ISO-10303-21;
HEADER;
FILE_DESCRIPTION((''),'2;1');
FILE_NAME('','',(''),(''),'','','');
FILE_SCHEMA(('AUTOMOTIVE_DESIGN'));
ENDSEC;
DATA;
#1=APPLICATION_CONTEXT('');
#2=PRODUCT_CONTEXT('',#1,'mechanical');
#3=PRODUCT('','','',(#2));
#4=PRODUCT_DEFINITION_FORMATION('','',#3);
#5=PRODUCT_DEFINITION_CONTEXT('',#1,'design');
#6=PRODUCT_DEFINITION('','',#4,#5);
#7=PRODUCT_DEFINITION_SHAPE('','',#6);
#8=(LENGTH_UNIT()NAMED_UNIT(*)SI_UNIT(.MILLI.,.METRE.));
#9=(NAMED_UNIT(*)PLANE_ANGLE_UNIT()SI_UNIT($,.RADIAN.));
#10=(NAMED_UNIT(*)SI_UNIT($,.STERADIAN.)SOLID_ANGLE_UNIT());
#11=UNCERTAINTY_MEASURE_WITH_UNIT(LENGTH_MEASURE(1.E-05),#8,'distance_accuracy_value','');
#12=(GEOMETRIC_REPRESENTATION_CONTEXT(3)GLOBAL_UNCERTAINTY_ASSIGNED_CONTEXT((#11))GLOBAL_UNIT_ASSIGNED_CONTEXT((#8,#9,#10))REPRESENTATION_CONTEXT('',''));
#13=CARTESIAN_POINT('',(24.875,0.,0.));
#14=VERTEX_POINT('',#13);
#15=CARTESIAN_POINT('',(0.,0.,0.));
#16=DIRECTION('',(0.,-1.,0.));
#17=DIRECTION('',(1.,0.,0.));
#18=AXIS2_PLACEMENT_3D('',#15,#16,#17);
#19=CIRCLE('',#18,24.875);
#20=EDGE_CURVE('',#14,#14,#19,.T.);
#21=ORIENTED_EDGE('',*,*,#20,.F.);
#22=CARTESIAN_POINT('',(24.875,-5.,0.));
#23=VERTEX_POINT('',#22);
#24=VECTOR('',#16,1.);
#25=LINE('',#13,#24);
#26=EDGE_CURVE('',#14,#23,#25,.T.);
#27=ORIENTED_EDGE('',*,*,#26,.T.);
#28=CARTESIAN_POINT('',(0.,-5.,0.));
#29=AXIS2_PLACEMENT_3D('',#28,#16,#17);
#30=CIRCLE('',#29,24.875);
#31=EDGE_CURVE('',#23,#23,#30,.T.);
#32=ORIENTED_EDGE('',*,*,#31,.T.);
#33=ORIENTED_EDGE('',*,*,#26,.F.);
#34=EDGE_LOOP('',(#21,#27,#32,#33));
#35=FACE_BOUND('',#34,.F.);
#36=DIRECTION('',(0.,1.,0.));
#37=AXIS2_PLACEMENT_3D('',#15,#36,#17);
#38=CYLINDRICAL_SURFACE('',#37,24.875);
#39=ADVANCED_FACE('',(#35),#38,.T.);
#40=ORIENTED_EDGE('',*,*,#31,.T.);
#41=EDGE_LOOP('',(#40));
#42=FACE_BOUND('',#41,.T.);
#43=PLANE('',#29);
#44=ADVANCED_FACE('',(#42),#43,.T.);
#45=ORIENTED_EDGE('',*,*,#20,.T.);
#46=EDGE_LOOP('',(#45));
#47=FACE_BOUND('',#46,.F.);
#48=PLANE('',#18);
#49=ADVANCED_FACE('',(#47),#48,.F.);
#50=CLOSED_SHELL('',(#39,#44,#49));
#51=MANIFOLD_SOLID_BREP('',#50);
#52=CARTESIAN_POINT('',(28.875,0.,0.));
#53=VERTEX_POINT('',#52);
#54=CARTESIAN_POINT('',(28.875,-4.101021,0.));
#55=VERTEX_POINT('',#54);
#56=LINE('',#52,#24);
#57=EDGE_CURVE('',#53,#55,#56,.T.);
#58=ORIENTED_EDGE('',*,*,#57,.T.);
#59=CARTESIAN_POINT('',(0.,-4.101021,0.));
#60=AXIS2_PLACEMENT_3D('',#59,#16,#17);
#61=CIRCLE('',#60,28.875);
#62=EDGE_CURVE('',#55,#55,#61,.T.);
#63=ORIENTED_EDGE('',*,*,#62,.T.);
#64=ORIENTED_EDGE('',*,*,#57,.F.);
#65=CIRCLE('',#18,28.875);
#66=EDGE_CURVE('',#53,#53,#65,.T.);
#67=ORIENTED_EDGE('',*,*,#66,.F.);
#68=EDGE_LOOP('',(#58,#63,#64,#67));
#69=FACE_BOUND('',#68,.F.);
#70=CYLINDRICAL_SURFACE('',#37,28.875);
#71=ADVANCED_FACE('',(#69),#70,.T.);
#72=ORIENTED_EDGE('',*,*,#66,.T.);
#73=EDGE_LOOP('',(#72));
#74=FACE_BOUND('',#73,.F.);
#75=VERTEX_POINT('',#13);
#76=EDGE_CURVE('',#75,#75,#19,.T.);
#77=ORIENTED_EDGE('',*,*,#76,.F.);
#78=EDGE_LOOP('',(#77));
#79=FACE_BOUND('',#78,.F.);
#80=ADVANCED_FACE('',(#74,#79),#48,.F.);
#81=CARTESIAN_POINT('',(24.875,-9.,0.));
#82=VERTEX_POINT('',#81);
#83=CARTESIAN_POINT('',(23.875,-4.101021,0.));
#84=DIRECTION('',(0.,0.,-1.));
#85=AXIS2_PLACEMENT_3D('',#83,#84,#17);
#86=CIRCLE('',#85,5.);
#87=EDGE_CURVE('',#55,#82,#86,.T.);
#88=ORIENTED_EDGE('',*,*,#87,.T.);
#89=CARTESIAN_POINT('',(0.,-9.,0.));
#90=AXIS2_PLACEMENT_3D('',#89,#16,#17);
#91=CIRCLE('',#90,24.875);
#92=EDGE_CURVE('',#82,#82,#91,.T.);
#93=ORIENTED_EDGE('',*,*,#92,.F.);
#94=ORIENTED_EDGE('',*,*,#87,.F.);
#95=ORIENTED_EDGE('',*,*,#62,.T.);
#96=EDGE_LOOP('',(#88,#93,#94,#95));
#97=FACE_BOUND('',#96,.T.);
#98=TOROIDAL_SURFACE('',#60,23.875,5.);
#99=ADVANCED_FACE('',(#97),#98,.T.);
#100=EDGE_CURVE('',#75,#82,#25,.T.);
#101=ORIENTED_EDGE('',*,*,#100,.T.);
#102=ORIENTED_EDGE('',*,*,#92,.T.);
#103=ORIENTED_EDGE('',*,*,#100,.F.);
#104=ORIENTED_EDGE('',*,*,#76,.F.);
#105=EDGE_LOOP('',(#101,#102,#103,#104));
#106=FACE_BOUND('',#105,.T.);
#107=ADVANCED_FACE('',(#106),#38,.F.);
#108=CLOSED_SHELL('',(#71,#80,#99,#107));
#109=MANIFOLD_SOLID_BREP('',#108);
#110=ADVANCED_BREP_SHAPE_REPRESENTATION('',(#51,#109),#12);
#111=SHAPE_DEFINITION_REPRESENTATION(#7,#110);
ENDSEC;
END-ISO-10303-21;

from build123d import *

# Parameters (mm, degrees)
F0_R     = 24.875
F1_DEPTH = 5
F0_R_2   = 28.875
F2_DEPTH = 9


# Not quite as in the source:
# - a fillet or chamfer that OpenCascade refuses, or shapes differently, is made with other operations: its cross-section is extruded or revolved along the edge and cut away or added


with BuildPart() as f1:
    # F0 (on Front) → F1 (new body)
    with BuildSketch(Plane.XZ):
        Circle(F0_R)
    extrude(amount=F1_DEPTH)


with BuildPart() as f2:
    # F0 (on Front) → F2 (new body)
    with BuildSketch(Plane.XZ):
        Circle(F0_R_2)
        Circle(F0_R, mode=Mode.SUBTRACT)
    extrude(amount=F2_DEPTH)

    # F3: fillet of radius 5 on 1 edges, made by hand

    # F3_s1 → F3_t2 (revolve, cut)
    with BuildSketch(Plane.XY):
        with BuildLine():
            ThreePointArc((28.875, -4.1010205144), (27.7479833462, -7.2632981746), (24.875, -9))
            Line((24.875, -9), (28.875, -9))
            Line((28.875, -9), (28.875, -4.1010205144))
        make_face()
    revolve(axis=Axis((0, -9, 0), (0, -1, 0)), mode=Mode.SUBTRACT)


solid = Compound([f1.part, f2.part])
